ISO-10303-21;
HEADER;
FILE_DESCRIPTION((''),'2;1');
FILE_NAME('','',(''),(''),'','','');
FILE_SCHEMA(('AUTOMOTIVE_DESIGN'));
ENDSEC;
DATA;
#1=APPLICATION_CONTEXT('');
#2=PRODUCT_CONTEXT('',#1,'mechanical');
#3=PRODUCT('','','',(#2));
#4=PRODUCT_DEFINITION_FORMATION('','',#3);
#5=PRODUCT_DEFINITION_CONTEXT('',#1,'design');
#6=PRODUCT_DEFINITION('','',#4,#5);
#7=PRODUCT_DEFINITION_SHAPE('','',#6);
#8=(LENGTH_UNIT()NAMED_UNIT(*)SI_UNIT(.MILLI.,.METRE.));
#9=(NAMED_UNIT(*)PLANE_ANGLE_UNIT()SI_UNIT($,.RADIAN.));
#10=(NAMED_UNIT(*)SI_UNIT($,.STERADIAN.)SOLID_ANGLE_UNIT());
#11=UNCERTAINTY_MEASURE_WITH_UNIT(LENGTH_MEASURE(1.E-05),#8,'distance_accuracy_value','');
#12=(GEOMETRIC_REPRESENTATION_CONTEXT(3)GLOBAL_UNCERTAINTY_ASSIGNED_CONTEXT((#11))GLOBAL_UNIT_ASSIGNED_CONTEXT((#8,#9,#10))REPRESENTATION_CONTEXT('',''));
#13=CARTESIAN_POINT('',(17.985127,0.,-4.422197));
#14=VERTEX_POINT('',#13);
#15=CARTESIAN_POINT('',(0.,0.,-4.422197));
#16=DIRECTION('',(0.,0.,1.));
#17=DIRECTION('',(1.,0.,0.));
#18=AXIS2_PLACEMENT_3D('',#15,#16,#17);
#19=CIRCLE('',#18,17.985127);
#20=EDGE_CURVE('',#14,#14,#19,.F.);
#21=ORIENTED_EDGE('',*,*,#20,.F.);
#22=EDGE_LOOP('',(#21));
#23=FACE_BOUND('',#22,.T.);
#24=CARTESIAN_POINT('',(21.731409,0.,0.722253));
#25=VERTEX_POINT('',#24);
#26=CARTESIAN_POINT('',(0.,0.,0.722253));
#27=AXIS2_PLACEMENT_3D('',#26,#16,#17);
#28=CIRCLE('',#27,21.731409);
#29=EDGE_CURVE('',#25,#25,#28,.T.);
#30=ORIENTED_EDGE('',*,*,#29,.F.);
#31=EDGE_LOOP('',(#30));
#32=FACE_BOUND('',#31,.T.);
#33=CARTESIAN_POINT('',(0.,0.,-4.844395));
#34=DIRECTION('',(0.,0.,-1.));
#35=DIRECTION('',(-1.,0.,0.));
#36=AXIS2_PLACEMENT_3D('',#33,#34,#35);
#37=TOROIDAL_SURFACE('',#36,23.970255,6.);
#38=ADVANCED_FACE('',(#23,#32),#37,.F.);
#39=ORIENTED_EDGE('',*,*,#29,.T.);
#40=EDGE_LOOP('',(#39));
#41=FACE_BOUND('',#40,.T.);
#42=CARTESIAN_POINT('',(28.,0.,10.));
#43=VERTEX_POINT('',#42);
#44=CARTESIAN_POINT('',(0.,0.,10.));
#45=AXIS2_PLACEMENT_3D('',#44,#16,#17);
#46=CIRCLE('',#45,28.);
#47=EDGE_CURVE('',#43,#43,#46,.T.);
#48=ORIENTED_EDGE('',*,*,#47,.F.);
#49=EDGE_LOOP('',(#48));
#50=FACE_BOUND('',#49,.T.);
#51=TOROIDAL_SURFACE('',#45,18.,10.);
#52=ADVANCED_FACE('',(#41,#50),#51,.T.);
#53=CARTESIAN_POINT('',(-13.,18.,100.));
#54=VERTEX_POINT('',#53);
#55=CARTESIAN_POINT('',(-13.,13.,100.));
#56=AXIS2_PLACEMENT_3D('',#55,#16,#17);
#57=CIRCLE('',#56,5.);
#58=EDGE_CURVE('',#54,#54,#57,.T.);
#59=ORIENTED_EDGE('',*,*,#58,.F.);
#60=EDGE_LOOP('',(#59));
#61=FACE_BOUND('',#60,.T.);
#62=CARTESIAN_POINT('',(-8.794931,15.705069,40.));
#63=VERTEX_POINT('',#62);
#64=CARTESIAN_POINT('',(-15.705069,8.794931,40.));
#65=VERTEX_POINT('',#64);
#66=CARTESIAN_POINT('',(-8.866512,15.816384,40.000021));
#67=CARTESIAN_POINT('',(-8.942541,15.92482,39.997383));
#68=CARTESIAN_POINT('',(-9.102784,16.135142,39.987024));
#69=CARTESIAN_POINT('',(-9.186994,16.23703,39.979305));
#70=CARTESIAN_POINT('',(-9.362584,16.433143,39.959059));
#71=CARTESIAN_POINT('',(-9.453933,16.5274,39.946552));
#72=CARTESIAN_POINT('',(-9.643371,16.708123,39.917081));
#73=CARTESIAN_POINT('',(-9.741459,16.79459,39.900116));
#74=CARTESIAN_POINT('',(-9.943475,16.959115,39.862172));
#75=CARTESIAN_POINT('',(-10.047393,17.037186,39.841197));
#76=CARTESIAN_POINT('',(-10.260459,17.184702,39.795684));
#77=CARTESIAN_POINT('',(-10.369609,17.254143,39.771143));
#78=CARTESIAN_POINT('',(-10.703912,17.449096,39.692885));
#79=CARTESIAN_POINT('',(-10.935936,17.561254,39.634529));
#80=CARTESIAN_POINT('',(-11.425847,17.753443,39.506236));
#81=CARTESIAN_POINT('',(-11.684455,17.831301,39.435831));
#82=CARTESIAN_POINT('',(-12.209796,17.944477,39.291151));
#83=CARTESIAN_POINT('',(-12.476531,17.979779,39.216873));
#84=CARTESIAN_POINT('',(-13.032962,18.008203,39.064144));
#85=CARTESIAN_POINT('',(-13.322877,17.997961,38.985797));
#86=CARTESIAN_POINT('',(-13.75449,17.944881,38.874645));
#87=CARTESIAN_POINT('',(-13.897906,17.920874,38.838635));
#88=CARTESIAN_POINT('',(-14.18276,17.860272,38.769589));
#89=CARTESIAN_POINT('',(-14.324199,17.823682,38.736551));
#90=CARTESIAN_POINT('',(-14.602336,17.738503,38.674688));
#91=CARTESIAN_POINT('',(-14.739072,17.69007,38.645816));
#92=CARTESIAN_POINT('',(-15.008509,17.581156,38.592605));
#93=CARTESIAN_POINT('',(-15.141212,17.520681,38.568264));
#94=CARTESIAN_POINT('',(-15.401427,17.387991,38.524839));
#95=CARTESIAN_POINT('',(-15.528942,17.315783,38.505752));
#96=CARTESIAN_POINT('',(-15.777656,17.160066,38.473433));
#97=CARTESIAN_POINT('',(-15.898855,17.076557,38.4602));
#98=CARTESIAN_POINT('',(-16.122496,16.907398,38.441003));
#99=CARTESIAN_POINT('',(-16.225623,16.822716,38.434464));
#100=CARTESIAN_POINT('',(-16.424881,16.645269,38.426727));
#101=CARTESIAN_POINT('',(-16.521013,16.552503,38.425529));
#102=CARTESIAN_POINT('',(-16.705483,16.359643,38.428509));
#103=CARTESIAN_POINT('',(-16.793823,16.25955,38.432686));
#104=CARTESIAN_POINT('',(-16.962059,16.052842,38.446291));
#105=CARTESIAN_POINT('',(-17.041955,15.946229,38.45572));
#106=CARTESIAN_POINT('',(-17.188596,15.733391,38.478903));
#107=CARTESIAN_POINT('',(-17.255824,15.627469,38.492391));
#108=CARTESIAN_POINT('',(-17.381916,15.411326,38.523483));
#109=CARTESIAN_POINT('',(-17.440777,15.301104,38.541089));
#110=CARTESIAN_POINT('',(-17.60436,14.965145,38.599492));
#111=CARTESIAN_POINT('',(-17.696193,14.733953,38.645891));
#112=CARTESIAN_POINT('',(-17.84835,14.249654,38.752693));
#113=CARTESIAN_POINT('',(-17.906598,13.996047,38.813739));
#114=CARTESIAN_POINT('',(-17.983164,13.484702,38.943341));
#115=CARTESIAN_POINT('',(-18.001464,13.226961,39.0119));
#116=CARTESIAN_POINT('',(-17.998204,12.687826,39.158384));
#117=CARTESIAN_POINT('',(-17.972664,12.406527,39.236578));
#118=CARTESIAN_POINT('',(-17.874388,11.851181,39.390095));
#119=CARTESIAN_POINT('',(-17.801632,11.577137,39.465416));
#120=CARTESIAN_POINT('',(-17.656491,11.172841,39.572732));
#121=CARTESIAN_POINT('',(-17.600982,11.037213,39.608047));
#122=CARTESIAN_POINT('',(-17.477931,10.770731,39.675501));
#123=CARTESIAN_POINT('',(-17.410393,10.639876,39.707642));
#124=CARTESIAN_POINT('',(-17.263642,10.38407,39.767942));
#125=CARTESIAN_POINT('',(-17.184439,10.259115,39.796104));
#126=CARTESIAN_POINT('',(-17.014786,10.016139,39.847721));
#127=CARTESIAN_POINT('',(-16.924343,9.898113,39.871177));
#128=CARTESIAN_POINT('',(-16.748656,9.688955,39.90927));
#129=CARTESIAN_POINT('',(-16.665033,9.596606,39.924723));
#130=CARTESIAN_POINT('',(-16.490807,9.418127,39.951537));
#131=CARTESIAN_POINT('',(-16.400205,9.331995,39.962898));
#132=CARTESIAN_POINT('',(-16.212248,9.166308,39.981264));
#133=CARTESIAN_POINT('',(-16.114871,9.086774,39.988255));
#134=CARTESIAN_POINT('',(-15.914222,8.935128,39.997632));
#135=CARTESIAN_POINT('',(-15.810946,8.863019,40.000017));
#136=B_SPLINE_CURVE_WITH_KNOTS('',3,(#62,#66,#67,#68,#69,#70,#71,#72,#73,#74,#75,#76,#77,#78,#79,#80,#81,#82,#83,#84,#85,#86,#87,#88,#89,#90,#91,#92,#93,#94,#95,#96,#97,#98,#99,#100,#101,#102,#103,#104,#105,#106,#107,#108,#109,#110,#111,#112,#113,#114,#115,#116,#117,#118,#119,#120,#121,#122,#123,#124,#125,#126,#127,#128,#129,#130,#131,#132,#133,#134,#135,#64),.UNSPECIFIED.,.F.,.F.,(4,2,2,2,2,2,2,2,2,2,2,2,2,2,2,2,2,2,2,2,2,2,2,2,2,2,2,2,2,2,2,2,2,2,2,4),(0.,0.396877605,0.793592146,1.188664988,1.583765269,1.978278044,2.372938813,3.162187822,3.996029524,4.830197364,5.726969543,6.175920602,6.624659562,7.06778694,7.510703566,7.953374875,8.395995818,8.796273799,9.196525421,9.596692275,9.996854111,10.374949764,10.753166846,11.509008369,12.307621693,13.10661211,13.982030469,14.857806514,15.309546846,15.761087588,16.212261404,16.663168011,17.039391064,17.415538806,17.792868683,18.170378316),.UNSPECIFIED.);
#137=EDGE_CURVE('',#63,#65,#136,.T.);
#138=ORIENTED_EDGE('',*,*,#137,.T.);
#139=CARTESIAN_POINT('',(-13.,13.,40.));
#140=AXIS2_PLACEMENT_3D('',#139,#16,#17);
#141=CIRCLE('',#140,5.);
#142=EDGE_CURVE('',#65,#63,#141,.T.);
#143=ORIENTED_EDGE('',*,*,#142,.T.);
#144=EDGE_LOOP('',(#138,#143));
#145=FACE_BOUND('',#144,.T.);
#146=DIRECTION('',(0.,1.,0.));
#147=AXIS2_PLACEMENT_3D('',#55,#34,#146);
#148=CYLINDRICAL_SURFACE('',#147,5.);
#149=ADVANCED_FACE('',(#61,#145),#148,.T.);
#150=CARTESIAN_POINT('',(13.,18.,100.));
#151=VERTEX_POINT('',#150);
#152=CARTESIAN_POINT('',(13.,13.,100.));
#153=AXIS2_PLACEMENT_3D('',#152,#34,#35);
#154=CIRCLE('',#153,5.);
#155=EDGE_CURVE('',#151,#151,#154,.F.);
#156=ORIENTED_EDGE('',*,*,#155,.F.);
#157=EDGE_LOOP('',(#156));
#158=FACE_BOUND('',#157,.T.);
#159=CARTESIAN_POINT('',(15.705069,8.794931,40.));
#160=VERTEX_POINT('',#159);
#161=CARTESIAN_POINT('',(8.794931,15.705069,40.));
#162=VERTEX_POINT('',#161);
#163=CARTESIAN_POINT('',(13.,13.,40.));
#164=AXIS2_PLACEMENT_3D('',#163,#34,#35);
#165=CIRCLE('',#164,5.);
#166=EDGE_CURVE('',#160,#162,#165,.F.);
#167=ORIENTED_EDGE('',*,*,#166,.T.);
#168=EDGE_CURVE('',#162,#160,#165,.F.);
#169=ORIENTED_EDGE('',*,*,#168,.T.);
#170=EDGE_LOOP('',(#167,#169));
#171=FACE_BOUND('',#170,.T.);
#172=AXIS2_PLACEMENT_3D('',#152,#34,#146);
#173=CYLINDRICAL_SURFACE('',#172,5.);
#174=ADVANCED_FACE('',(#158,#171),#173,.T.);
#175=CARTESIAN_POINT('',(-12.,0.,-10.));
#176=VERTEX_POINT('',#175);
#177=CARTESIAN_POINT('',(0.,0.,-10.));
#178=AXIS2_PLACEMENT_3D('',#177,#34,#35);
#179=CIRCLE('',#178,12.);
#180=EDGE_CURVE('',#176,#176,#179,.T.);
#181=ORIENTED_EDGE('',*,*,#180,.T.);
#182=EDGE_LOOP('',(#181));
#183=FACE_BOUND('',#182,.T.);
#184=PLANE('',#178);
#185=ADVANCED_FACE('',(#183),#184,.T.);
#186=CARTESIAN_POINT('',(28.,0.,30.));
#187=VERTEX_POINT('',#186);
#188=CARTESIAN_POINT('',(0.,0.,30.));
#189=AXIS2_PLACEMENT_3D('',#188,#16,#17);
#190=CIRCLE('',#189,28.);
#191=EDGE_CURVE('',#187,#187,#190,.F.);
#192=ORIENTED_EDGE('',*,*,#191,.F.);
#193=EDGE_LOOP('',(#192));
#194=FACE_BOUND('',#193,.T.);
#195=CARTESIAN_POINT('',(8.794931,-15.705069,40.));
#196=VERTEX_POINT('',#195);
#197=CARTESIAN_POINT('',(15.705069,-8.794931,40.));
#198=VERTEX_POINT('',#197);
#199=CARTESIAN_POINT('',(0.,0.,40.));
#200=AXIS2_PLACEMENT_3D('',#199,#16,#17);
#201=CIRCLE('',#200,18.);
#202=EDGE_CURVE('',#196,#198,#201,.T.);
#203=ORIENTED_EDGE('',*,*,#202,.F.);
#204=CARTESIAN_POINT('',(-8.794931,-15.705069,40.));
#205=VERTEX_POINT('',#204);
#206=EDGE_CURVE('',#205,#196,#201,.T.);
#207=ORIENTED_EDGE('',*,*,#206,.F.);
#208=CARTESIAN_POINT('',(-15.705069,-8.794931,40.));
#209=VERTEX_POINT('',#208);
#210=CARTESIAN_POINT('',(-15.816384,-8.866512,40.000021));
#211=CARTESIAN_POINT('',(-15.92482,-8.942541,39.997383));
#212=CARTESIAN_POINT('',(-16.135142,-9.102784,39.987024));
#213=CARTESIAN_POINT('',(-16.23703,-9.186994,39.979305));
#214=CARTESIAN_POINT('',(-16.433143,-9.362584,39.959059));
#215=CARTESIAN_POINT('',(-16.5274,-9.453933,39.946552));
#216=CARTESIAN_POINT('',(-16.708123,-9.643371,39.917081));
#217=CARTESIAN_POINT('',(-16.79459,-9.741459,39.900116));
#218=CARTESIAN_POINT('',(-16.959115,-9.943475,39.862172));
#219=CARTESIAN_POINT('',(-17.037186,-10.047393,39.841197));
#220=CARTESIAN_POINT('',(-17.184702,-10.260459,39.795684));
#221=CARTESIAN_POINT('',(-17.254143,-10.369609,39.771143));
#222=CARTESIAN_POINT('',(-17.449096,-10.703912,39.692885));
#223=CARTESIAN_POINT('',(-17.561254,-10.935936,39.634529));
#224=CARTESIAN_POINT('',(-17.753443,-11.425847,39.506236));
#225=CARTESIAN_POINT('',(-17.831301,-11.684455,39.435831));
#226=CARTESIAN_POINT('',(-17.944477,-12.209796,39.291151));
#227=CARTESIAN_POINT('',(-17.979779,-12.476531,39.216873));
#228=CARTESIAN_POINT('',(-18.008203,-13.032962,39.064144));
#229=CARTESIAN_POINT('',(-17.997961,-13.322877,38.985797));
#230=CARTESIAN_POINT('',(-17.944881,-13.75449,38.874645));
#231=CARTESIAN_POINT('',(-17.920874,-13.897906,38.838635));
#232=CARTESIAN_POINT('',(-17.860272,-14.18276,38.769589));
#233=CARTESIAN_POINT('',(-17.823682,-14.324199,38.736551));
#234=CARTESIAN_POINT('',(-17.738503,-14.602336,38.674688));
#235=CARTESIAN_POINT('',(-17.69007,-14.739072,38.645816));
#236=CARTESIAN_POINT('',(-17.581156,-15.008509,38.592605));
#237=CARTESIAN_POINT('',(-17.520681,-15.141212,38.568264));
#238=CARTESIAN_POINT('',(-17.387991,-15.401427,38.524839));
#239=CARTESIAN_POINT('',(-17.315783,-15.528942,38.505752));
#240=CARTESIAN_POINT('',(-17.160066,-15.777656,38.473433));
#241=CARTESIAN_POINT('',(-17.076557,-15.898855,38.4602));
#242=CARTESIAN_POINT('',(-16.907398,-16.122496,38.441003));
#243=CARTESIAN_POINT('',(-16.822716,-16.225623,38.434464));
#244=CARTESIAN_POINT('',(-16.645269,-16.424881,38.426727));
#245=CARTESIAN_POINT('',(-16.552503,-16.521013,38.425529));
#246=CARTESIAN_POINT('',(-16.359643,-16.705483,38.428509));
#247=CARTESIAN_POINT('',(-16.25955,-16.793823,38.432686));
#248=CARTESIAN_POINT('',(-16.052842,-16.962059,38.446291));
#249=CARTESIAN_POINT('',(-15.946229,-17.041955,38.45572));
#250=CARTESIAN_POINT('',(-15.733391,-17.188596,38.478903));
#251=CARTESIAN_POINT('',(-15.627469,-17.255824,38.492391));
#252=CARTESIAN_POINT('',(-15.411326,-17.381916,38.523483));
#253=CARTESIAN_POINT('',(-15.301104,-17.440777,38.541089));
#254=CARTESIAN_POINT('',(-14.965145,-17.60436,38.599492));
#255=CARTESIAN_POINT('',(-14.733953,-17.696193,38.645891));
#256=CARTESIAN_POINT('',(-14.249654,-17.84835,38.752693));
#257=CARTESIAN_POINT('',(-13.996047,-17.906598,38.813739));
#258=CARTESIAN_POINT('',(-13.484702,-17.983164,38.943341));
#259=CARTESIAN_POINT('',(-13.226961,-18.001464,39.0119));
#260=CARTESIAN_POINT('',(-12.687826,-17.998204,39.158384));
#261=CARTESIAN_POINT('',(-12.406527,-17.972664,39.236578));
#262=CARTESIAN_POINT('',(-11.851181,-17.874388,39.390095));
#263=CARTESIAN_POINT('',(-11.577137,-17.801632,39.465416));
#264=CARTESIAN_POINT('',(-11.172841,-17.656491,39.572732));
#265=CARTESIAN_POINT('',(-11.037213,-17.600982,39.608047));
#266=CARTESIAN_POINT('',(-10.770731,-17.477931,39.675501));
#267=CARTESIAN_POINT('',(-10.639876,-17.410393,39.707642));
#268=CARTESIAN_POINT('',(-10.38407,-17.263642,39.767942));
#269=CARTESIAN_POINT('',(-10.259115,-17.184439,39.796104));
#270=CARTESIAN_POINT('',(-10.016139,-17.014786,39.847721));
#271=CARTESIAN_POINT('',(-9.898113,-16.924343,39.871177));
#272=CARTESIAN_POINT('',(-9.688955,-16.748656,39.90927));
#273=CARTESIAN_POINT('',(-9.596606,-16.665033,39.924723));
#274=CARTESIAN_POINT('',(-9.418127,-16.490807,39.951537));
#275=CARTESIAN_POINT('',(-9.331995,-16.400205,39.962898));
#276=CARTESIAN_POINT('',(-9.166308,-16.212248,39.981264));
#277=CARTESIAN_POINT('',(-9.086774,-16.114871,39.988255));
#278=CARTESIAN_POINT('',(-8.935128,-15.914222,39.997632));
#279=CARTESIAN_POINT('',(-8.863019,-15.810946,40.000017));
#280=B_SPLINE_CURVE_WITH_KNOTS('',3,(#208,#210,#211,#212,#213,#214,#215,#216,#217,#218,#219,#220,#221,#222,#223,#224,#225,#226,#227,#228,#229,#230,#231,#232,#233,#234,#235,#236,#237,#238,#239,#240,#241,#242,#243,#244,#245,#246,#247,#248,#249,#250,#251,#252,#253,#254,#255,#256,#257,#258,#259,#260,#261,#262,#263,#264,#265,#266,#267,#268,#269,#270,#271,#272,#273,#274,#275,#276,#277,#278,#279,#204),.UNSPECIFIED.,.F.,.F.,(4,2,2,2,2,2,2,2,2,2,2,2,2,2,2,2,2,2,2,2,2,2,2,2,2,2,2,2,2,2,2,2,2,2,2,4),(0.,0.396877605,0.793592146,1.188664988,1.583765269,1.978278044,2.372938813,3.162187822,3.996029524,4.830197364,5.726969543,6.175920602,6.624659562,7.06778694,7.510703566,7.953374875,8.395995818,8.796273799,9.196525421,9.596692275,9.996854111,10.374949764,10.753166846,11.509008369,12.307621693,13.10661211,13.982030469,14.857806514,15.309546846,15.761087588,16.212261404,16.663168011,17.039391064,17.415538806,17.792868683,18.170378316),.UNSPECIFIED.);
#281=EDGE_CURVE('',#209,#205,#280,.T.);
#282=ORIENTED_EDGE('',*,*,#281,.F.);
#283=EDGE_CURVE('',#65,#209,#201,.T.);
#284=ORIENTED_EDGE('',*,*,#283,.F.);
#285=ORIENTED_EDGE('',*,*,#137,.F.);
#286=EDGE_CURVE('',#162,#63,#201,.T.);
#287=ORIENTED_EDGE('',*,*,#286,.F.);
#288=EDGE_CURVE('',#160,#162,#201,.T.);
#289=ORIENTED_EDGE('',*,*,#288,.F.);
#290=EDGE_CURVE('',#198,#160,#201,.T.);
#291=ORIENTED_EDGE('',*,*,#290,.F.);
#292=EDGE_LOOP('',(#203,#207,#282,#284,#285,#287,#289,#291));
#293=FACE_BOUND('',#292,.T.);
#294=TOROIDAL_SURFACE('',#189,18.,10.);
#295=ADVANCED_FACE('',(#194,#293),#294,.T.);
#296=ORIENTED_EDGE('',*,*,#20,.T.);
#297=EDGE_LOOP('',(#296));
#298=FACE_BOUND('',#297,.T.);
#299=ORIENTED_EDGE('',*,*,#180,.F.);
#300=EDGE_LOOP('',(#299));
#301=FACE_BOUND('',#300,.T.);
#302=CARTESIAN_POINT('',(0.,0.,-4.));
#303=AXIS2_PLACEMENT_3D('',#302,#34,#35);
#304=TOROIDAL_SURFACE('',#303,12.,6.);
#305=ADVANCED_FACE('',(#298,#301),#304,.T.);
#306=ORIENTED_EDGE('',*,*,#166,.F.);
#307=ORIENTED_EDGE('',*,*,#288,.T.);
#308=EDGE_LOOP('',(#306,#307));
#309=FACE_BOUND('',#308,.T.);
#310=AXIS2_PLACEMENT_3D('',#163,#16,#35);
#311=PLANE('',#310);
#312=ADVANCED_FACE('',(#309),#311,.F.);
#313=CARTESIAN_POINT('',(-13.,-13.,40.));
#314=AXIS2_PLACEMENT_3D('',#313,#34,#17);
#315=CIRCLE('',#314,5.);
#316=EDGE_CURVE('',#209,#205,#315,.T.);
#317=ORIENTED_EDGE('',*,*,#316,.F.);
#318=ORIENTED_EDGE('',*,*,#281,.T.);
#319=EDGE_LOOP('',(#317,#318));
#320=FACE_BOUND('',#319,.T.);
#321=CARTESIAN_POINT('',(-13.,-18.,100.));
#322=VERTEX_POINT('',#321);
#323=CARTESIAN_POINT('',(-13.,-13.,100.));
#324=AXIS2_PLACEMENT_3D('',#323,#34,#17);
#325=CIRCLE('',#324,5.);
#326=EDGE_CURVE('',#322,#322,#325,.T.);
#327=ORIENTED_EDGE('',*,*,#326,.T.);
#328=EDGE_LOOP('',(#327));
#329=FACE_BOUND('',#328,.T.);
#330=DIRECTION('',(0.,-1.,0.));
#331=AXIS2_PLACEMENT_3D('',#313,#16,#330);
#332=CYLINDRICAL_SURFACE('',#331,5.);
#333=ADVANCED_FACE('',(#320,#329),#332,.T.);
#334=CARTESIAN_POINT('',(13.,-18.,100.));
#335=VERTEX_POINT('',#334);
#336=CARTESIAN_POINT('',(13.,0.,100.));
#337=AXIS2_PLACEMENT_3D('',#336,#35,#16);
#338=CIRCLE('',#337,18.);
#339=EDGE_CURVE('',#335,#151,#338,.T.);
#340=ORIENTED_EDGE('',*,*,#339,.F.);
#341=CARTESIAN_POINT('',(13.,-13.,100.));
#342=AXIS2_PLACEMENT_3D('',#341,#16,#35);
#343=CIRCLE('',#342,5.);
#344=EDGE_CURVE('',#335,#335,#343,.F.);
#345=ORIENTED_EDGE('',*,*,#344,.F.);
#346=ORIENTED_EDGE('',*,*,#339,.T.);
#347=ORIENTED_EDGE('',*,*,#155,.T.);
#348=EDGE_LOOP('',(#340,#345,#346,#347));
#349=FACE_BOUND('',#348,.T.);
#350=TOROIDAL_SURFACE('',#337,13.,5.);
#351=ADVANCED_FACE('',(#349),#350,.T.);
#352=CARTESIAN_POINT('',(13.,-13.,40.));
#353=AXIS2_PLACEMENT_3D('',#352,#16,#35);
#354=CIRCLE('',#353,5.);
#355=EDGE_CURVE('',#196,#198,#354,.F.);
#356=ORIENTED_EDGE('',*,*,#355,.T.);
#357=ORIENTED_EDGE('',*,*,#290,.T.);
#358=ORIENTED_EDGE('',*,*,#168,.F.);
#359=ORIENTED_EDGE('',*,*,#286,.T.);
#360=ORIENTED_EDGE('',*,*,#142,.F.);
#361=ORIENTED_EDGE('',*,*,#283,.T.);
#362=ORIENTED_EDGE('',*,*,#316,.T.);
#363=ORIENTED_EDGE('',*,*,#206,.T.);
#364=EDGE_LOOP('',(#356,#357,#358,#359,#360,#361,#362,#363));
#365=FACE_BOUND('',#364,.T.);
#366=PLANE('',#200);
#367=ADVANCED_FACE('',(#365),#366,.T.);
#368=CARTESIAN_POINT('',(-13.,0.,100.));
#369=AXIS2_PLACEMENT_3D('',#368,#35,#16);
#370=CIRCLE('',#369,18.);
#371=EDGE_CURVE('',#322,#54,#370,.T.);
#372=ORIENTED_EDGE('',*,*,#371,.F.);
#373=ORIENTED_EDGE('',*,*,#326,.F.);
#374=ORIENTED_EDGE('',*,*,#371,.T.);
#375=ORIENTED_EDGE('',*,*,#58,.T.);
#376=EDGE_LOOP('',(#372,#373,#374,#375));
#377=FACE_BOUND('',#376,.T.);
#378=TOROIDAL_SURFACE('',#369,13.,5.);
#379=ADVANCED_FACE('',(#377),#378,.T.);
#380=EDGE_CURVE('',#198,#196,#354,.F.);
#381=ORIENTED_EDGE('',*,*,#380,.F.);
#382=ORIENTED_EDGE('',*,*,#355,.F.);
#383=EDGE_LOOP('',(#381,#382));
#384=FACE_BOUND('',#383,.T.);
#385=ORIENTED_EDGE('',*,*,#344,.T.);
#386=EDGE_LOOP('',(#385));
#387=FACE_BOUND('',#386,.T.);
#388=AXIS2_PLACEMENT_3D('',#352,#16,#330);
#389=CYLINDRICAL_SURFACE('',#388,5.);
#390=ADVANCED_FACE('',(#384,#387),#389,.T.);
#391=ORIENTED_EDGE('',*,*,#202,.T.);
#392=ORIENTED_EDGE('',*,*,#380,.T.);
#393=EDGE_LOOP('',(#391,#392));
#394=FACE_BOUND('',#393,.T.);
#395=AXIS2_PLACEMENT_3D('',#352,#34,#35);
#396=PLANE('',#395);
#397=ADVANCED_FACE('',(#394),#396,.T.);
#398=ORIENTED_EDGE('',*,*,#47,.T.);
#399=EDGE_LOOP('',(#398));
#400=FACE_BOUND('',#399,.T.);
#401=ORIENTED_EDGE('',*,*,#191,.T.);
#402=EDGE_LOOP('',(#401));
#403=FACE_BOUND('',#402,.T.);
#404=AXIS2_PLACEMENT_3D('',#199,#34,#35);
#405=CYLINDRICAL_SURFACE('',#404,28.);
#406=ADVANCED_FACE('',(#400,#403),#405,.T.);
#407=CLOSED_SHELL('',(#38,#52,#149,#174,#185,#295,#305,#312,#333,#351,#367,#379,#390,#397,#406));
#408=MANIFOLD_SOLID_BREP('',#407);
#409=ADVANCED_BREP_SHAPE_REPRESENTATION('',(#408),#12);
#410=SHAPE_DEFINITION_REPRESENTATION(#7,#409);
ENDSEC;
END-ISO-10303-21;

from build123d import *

# Parameters (mm, degrees)
SKETCH_1_R      = 28
EXTRUDE_1_DEPTH = 40
SKETCH_2_R      = 5
FILLET_1_R      = 10
SKETCH_4_R      = 18
EXTRUDE_2_DEPTH = 10
FILLET_2_R      = 6
FILLET_3_R      = 6


with BuildPart() as part:
    # 草图1 → 凸台-拉伸1 (new body)
    with BuildSketch(Plane.XY):
        Circle(SKETCH_1_R)
    extrude(amount=EXTRUDE_1_DEPTH)

    # 扫描1: sweep along a path in 草图3
    with BuildLine(Plane(origin=(-13, 0, 0), x_dir=(0, 0, -1), z_dir=(1, 0, 0))) as sweep_1_path:
        Line((-40, 13), (-100, 13))
        ThreePointArc((-100, 13), (-113, 0), (-100, -13))
        Line((-100, -13), (-40, -13))
    # 草图2 → 扫描1 (sweep)
    with BuildSketch(Plane.XY.offset(40)):
        with Locations((-13, 13)):
            Circle(SKETCH_2_R)
    sweep_1 = sweep(path=sweep_1_path.line)

    # 圆角1
    # the kernel refuses this fillet: 10 mm, written as the material it takes off along each edge
    with BuildSketch(Plane(origin=(0, 0, 0), x_dir=(1, 0, 0), z_dir=(0, -1, 0))) as fillet_1_piece_1:
        with BuildLine():
            CenterArc((28 - FILLET_1_R, FILLET_1_R), FILLET_1_R, 270, 90)
            Line((28 - FILLET_1_R, 0), (28, 0))
            Line((28, 0), (28, FILLET_1_R))
        make_face()
    revolve(axis=Axis((0, 0, 0), (0, 0, 1)), mode=Mode.SUBTRACT)
    with BuildSketch(Plane(origin=(0, 0, 40), x_dir=(1, 0, 0), z_dir=(0, -1, 0))) as fillet_1_piece_2_section:
        with BuildLine():
            CenterArc((28 - FILLET_1_R, -FILLET_1_R), FILLET_1_R, 0, 90)
            Line((28 - FILLET_1_R, 0), (28, 0))
            Line((28, 0), (28, -FILLET_1_R))
        make_face()
    fillet_1_piece_2 = revolve(axis=Axis((0, 0, 40), (0, 0, 1)), mode=Mode.PRIVATE)
    fillet_1_piece_2 = fillet_1_piece_2 - Plane(origin=(-13, -13, 37.183961808), x_dir=(1, 0, 0), z_dir=(0, 0, -1)) * Cylinder(5, 112, mode=Mode.PRIVATE)
    fillet_1_piece_2 = fillet_1_piece_2 - Plane(origin=(-13, 13, 37.183961808), x_dir=(1, 0, 0), z_dir=(0, 0, 1)) * Cylinder(5, 112, mode=Mode.PRIVATE)
    add(fillet_1_piece_2, mode=Mode.SUBTRACT)

    # 镜向1: 扫描1 across plane
    add(sweep_1.mirror(Plane(origin=(0, 0, 0), x_dir=(0, 0, 1), z_dir=(1, 0, 0))))

    # 草图4 → 凸台-拉伸2 (add)
    with BuildSketch(Plane(origin=(0, 0, 0), x_dir=(-1, 0, 0), z_dir=(0, 0, -1))):
        with Locations(Location((0, 0, 0), (0, 0, 180))):
            Circle(SKETCH_4_R)
    extrude(amount=EXTRUDE_2_DEPTH)

    # 圆角2
    fillet_2_edges = [part.edges().sort_by_distance(p)[0] for p in [
        (-18, 0, -10),
    ]]
    fillet(fillet_2_edges, radius=FILLET_2_R)

    # 圆角3
    fillet_3_edges = [part.edges().sort_by_distance(p)[0] for p in [
        (-18, 0, 0),
    ]]
    fillet(fillet_3_edges, radius=FILLET_3_R)


solid = part.part
